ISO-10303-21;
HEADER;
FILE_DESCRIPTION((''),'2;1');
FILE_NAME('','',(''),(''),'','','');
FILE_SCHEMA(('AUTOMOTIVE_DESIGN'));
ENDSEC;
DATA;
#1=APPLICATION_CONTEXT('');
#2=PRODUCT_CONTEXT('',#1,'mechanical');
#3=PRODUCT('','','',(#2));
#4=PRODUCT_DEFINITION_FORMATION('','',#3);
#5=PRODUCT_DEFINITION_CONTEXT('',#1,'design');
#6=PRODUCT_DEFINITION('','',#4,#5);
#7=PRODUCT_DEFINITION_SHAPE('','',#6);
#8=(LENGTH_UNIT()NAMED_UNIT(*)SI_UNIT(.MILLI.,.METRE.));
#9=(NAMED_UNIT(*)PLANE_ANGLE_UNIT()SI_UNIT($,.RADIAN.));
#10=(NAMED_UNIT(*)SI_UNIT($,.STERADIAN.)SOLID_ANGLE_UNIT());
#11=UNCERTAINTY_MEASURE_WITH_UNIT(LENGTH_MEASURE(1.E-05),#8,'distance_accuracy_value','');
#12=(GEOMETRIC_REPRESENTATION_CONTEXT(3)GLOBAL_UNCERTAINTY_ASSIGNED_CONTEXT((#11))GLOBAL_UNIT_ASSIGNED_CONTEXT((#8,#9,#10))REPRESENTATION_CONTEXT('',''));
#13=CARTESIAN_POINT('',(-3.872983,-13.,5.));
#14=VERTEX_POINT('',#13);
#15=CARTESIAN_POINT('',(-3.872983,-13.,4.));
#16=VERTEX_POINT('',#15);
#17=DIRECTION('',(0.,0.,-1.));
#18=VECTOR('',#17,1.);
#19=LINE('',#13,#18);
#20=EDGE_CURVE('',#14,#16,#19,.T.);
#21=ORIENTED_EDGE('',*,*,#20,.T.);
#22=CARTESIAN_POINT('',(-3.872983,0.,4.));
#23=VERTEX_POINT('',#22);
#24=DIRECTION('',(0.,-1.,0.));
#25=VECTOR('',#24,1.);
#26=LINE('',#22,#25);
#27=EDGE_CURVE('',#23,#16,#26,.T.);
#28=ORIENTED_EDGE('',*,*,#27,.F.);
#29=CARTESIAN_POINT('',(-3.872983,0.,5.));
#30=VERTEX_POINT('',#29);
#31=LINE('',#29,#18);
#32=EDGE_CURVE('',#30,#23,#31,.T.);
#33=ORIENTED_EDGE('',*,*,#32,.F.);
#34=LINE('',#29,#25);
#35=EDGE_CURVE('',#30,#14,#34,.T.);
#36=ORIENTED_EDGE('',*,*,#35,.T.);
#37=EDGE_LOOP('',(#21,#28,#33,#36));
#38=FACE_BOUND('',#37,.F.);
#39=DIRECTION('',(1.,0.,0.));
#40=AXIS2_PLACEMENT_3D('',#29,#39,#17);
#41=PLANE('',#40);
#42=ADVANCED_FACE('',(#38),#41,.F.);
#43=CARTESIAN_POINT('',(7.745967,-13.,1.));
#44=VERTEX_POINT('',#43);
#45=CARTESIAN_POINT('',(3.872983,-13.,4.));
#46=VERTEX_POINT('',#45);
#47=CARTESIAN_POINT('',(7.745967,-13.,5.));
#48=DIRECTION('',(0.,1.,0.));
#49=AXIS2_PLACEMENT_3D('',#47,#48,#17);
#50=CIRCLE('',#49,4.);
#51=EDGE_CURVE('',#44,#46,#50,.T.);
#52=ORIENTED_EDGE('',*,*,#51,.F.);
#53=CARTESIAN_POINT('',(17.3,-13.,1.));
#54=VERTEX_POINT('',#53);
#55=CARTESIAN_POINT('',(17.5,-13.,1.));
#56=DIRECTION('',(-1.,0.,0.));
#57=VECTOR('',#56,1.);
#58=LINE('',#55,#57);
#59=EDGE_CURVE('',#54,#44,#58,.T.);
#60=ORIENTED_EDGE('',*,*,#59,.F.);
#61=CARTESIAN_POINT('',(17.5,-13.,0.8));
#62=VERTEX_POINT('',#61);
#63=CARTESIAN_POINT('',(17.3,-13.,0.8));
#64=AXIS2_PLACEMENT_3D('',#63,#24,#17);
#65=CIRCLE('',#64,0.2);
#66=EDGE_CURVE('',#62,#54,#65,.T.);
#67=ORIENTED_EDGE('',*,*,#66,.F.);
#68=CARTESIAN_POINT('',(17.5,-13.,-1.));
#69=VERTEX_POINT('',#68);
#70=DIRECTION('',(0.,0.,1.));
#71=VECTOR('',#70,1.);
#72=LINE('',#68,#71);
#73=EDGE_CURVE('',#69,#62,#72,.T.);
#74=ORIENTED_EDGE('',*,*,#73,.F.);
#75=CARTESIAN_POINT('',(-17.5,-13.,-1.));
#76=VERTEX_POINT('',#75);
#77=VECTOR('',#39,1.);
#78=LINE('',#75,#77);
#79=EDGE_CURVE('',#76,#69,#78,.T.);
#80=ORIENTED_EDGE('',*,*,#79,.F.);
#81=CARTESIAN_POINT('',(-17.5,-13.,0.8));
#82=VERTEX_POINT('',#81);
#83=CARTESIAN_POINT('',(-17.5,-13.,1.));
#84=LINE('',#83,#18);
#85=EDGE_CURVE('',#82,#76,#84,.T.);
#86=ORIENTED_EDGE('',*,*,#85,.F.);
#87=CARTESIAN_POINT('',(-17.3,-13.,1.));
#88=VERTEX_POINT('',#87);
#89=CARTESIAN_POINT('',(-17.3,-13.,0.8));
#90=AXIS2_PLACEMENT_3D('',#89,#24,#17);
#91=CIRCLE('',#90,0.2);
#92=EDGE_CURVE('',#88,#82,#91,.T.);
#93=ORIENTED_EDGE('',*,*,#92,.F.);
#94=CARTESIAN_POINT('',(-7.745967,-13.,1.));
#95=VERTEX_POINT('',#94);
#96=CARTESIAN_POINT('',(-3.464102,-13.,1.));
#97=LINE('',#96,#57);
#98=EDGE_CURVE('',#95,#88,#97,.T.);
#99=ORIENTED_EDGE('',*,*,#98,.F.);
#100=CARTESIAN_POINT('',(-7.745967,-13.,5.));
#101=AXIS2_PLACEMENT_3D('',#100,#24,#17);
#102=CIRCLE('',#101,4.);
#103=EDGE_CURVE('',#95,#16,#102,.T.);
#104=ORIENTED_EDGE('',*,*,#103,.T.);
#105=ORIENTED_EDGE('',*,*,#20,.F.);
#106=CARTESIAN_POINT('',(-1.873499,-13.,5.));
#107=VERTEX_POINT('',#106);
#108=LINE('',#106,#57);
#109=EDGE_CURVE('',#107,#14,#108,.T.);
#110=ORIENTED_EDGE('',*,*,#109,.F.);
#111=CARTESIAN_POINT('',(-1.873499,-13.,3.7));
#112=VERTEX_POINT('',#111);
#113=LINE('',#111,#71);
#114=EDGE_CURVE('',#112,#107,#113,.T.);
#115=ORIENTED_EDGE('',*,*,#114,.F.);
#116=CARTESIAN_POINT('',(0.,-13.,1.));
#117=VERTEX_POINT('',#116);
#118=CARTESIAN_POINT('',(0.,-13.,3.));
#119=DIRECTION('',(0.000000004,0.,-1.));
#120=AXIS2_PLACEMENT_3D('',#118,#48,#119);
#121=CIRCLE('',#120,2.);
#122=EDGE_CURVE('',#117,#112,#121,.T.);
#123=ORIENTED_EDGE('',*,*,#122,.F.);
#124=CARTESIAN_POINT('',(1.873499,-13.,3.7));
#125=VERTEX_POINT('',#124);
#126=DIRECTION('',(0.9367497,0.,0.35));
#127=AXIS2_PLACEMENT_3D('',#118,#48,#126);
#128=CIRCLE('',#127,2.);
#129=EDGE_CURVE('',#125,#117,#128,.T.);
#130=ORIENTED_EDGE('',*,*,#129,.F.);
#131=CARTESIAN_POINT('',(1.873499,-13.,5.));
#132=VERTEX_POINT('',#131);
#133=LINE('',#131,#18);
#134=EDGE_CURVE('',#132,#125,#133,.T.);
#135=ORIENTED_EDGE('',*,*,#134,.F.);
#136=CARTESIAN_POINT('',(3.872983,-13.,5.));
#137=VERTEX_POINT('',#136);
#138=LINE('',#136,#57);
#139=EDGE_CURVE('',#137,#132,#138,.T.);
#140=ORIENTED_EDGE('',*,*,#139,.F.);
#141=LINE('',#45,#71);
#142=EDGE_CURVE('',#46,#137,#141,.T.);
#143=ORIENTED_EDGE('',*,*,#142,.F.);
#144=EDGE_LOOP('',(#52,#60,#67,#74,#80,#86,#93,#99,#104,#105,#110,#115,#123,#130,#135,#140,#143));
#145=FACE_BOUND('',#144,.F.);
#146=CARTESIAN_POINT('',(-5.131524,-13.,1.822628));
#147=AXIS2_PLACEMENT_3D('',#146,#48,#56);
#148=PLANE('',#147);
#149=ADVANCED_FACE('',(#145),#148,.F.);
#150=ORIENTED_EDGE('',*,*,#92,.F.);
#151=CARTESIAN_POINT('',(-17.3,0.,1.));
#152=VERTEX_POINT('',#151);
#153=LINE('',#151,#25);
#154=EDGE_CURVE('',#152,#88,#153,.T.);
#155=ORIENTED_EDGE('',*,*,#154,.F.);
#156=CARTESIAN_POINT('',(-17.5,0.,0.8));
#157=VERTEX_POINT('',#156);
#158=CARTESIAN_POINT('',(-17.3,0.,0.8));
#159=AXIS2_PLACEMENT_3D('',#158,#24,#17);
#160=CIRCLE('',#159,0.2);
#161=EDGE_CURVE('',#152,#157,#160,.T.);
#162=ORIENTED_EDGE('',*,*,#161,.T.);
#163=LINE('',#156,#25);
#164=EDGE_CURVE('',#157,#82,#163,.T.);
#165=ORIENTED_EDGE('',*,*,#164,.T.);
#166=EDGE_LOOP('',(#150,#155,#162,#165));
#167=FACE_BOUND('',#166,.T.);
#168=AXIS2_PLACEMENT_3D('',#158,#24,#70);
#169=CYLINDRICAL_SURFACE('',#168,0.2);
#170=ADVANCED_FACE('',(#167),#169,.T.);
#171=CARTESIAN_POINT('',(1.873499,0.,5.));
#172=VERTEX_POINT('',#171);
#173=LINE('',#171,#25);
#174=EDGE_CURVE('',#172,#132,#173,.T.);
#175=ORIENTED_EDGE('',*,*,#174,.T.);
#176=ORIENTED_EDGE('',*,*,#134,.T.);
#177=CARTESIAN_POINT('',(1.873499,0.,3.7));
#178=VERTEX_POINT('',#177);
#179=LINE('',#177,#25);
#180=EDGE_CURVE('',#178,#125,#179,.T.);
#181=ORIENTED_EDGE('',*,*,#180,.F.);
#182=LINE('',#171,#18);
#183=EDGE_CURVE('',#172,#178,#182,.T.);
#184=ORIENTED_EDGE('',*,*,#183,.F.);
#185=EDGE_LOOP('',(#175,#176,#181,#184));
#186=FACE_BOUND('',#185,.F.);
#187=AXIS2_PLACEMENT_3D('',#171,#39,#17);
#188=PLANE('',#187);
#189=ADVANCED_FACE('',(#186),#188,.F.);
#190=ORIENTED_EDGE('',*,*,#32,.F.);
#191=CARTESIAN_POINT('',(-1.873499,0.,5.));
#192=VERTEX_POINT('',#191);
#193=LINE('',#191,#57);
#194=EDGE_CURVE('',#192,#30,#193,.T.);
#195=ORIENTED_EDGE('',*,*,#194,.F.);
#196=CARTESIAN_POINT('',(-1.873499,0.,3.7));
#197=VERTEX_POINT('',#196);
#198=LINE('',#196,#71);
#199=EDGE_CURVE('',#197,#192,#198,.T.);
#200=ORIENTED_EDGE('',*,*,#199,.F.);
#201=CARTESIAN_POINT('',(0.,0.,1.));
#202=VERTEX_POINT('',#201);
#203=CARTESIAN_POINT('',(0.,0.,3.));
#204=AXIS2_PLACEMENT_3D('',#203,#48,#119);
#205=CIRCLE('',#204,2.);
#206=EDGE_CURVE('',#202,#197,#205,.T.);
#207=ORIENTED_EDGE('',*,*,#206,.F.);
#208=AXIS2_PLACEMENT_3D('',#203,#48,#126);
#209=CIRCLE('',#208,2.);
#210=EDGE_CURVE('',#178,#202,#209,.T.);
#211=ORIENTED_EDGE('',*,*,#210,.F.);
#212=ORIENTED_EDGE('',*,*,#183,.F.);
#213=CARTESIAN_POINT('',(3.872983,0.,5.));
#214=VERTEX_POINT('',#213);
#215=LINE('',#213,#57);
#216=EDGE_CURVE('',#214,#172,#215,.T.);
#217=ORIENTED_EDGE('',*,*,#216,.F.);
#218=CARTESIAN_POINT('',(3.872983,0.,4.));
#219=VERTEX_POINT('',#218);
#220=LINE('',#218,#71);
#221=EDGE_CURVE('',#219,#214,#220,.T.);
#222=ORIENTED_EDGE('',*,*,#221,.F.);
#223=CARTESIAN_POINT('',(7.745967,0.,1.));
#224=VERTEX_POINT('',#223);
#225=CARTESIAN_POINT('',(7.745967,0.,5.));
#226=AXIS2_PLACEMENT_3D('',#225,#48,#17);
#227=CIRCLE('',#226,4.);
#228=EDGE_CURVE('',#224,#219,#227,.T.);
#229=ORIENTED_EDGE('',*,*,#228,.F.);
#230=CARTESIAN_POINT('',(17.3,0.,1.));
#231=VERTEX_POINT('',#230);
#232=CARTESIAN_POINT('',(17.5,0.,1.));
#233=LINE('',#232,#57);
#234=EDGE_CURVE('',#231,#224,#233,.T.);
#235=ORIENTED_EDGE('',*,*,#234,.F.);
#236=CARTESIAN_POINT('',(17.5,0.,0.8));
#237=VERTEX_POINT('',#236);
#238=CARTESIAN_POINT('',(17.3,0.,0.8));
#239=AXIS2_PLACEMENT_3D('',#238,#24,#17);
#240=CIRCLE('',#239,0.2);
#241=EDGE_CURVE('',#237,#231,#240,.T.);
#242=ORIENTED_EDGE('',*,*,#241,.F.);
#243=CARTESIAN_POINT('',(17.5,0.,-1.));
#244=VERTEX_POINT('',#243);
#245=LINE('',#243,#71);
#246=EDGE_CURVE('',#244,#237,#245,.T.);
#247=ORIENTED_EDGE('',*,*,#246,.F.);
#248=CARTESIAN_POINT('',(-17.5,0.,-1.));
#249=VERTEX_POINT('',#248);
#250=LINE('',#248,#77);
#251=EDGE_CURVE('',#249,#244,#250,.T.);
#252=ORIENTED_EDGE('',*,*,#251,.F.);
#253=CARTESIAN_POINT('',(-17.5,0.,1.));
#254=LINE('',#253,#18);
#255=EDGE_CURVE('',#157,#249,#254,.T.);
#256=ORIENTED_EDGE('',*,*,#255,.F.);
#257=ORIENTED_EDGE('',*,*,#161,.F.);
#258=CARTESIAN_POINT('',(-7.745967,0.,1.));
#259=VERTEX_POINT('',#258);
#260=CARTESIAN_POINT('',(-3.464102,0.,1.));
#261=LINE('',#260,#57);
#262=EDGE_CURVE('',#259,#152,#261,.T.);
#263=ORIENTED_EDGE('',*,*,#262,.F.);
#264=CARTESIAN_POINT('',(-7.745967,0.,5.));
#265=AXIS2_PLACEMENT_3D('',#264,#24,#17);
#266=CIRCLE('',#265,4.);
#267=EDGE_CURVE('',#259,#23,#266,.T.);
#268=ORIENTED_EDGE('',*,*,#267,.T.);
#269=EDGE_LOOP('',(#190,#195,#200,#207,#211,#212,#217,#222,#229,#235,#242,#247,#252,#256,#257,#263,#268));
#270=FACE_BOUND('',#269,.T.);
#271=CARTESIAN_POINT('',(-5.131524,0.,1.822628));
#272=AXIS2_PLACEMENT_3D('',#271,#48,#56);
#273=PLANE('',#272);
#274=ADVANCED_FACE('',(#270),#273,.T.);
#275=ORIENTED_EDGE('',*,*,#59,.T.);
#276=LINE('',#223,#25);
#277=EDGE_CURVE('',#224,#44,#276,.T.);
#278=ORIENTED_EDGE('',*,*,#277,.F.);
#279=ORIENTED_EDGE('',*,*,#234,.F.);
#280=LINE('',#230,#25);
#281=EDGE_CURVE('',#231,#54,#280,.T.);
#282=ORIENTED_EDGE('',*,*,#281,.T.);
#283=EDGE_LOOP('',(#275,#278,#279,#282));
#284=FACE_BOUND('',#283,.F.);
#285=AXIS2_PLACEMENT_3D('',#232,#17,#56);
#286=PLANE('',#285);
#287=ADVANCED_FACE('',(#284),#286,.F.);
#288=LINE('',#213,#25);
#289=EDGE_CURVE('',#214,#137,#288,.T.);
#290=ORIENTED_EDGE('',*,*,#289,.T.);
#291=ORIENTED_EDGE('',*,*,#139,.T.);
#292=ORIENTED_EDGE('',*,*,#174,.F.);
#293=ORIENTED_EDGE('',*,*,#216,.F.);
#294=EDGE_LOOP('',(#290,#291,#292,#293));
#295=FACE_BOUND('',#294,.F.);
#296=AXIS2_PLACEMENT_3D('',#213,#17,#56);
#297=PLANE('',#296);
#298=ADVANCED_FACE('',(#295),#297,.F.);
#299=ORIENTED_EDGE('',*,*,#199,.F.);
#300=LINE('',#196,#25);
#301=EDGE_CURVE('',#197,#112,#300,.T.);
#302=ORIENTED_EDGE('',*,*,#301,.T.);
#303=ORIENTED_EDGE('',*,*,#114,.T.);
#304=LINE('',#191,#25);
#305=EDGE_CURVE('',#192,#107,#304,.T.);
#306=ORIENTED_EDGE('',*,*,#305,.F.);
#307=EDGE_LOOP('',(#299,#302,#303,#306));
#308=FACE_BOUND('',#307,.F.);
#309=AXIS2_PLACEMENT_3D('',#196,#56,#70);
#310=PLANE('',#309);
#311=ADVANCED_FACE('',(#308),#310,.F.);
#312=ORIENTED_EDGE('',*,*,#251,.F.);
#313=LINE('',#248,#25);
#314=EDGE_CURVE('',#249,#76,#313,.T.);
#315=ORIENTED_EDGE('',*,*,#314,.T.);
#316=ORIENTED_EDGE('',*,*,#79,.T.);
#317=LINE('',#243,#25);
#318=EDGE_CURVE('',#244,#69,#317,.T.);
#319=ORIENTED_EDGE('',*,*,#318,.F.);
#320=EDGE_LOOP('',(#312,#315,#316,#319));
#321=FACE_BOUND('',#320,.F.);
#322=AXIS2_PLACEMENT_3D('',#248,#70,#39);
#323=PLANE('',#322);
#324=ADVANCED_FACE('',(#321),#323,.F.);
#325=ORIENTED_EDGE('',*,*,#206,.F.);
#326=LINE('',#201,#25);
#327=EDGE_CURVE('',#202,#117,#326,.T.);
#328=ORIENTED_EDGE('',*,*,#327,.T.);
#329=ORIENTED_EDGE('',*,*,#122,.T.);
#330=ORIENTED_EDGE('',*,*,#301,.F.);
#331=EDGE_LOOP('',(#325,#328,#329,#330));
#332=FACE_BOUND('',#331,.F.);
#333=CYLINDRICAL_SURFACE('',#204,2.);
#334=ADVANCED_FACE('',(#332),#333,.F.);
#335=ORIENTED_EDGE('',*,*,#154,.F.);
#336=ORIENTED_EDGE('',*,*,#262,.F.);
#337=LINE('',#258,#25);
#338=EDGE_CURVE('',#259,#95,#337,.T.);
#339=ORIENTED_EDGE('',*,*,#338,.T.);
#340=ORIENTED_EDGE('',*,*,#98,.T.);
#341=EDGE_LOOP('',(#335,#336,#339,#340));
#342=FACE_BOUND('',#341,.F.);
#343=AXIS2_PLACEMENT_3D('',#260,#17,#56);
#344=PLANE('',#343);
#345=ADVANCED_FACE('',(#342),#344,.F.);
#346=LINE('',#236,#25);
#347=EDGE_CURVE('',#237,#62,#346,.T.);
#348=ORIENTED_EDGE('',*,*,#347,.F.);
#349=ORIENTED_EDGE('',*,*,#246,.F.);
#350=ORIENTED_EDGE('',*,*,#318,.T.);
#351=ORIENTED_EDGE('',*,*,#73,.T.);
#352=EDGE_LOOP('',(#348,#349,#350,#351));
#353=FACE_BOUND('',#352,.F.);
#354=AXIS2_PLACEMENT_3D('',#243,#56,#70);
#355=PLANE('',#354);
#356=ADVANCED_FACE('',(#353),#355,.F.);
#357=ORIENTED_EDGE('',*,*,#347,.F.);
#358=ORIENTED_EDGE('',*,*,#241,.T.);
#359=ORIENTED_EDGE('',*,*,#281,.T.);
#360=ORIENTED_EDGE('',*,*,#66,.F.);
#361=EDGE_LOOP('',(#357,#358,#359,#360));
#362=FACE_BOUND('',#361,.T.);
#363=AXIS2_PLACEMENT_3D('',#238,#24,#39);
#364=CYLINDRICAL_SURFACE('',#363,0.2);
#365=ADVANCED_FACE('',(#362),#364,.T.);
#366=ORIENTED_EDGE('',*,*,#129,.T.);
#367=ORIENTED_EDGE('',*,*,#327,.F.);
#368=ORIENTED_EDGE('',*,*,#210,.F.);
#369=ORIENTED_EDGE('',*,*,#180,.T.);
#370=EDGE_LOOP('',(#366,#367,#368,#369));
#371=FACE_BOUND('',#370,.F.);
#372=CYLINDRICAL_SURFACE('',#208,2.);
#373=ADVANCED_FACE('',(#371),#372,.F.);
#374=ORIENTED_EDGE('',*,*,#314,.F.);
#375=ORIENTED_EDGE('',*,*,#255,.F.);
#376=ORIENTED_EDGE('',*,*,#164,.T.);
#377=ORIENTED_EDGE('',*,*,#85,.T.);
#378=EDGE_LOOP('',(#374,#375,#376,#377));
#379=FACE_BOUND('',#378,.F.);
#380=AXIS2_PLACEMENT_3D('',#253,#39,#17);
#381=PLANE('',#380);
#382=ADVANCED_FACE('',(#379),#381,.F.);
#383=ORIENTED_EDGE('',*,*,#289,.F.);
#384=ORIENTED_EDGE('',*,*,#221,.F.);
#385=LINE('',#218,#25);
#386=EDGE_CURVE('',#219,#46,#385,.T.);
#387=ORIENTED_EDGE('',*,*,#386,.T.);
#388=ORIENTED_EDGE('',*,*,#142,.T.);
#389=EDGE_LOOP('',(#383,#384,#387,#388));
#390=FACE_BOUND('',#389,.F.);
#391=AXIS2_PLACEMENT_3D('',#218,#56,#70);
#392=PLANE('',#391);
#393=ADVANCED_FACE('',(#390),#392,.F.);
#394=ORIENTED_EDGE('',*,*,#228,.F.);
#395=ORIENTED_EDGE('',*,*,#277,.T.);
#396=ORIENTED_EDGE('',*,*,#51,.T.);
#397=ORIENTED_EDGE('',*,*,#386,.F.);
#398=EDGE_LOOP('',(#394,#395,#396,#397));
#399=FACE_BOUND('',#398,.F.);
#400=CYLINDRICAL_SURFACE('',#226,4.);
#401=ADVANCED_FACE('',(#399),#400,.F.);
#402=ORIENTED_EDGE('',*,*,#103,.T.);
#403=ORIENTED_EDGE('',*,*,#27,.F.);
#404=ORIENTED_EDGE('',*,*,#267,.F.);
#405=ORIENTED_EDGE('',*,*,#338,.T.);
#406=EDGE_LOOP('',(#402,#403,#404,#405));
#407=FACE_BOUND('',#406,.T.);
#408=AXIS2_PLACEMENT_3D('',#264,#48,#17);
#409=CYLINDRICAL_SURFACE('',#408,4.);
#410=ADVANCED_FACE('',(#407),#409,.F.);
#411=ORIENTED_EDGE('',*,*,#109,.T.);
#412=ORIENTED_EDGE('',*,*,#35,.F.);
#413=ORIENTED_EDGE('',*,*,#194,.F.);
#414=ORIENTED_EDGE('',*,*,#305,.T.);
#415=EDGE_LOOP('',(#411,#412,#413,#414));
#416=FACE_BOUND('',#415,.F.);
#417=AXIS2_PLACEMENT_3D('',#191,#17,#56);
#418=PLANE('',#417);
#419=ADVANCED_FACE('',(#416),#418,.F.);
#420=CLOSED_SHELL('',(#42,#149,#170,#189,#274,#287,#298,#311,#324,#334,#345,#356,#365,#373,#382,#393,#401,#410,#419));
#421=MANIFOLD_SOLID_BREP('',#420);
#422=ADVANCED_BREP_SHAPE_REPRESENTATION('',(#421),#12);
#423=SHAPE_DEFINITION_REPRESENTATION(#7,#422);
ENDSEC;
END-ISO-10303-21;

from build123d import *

# Parameters (mm, degrees)
F1_DEPTH    = 13
F2_T1_DEPTH = 13
F3_R        = 0.2


# Not quite as in the source:
# - a fillet or chamfer that OpenCascade refuses, or shapes differently, is made with other operations: its cross-section is extruded or revolved along the edge and cut away or added
# - a feature names something its author has since deleted; it is built from what else it names


with BuildPart() as f1:
    # F0 (on Front) → F1 (new body)
    with BuildSketch(Plane.XZ):
        with BuildLine():
            Line((-3.4641016151, 1), (-17.5, 1))
            Line((-17.5, 1), (-17.5, -1))
            Line((-17.5, -1), (0, -1))
            ThreePointArc((0, -1), (-2, -0.4641016151), (-3.4641016151, 1))
        make_face()
        with BuildLine():
            ThreePointArc((-3.9382737335, 3.7), (-3.9397068673, 2.3081114255), (-3.4641016151, 1))
            Line((-3.4641016151, 1), (7e-09, 1))
            ThreePointArc((7e-09, 1), (-1.6431676705, 1.859824572), (-1.8734993995, 3.7))
            Line((-1.8734993995, 3.7), (-3.9382737335, 3.7))
        make_face()
        with BuildLine():
            Line((7e-09, 1), (-3.4641016151, 1))
            ThreePointArc((-3.4641016151, 1), (-2, -0.4641016151), (0, -1))
            ThreePointArc((0, -1), (2, -0.4641016151), (3.4641016151, 1))
            Line((3.4641016151, 1), (7e-09, 1))
        make_face()
        with BuildLine():
            ThreePointArc((1.8734993995, 3.7), (1.6431676745, 1.8598245778), (7e-09, 1))
            Line((7e-09, 1), (3.4641016151, 1))
            ThreePointArc((3.4641016151, 1), (3.9397068673, 2.3081114255), (3.9382737335, 3.7))
            Line((3.9382737335, 3.7), (1.8734993995, 3.7))
        make_face()
        with BuildLine():
            ThreePointArc((-3.8729833462, 4), (-3.9085079367, 3.8506266565), (-3.9382737335, 3.7))
            Line((-3.9382737335, 3.7), (-1.8734993995, 3.7))
            Line((-1.8734993995, 3.7), (-1.8734993995, 5))
            Line((-1.8734993995, 5), (-3.8729833462, 5))
            Line((-3.8729833462, 5), (-3.8729833462, 4))
        make_face()
        with BuildLine():
            ThreePointArc((3.4641016151, 1), (2, -0.4641016151), (0, -1))
            Line((0, -1), (17.5, -1))
            Line((17.5, -1), (17.5, 1))
            Line((17.5, 1), (3.4641016151, 1))
        make_face()
        with BuildLine():
            Line((1.8734993995, 5), (1.8734993995, 3.7))
            Line((1.8734993995, 3.7), (3.9382737335, 3.7))
            ThreePointArc((3.9382737335, 3.7), (3.9085079367, 3.8506266565), (3.8729833462, 4))
            Line((3.8729833462, 4), (3.8729833462, 5))
            Line((3.8729833462, 5), (1.8734993995, 5))
        make_face()
    extrude(amount=F1_DEPTH)

    # F2: fillet of radius 4 on 2 edges, made by hand

    # F2_s2 → F2_t1 (join)
    with BuildSketch(Plane.XZ):
        with BuildLine():
            ThreePointArc((-7.7459666924, 1), (-5.2964769496, 1.8377223398), (-3.8729833462, 4))
            ThreePointArc((-3.8729833462, 4), (-3.9633576589, 2.4598184865), (-3.4641016151, 1))
            Line((-3.4641016151, 1), (-7.7459666924, 1))
        make_face()
        with BuildLine():
            ThreePointArc((7.7459666924, 1), (5.2964769496, 1.8377223398), (3.8729833462, 4))
            ThreePointArc((3.8729833462, 4), (3.9633576589, 2.4598184865), (3.4641016151, 1))
            Line((3.4641016151, 1), (7.7459666924, 1))
        make_face()
    extrude(amount=F2_T1_DEPTH)

    # F3
    f3_edges = [f1.edges().sort_by_distance(p)[0] for p in [
        (-17.5, -6.5, 1),
        (17.5, -6.5, 1),
    ]]
    fillet(f3_edges, radius=F3_R)


solid = f1.part
